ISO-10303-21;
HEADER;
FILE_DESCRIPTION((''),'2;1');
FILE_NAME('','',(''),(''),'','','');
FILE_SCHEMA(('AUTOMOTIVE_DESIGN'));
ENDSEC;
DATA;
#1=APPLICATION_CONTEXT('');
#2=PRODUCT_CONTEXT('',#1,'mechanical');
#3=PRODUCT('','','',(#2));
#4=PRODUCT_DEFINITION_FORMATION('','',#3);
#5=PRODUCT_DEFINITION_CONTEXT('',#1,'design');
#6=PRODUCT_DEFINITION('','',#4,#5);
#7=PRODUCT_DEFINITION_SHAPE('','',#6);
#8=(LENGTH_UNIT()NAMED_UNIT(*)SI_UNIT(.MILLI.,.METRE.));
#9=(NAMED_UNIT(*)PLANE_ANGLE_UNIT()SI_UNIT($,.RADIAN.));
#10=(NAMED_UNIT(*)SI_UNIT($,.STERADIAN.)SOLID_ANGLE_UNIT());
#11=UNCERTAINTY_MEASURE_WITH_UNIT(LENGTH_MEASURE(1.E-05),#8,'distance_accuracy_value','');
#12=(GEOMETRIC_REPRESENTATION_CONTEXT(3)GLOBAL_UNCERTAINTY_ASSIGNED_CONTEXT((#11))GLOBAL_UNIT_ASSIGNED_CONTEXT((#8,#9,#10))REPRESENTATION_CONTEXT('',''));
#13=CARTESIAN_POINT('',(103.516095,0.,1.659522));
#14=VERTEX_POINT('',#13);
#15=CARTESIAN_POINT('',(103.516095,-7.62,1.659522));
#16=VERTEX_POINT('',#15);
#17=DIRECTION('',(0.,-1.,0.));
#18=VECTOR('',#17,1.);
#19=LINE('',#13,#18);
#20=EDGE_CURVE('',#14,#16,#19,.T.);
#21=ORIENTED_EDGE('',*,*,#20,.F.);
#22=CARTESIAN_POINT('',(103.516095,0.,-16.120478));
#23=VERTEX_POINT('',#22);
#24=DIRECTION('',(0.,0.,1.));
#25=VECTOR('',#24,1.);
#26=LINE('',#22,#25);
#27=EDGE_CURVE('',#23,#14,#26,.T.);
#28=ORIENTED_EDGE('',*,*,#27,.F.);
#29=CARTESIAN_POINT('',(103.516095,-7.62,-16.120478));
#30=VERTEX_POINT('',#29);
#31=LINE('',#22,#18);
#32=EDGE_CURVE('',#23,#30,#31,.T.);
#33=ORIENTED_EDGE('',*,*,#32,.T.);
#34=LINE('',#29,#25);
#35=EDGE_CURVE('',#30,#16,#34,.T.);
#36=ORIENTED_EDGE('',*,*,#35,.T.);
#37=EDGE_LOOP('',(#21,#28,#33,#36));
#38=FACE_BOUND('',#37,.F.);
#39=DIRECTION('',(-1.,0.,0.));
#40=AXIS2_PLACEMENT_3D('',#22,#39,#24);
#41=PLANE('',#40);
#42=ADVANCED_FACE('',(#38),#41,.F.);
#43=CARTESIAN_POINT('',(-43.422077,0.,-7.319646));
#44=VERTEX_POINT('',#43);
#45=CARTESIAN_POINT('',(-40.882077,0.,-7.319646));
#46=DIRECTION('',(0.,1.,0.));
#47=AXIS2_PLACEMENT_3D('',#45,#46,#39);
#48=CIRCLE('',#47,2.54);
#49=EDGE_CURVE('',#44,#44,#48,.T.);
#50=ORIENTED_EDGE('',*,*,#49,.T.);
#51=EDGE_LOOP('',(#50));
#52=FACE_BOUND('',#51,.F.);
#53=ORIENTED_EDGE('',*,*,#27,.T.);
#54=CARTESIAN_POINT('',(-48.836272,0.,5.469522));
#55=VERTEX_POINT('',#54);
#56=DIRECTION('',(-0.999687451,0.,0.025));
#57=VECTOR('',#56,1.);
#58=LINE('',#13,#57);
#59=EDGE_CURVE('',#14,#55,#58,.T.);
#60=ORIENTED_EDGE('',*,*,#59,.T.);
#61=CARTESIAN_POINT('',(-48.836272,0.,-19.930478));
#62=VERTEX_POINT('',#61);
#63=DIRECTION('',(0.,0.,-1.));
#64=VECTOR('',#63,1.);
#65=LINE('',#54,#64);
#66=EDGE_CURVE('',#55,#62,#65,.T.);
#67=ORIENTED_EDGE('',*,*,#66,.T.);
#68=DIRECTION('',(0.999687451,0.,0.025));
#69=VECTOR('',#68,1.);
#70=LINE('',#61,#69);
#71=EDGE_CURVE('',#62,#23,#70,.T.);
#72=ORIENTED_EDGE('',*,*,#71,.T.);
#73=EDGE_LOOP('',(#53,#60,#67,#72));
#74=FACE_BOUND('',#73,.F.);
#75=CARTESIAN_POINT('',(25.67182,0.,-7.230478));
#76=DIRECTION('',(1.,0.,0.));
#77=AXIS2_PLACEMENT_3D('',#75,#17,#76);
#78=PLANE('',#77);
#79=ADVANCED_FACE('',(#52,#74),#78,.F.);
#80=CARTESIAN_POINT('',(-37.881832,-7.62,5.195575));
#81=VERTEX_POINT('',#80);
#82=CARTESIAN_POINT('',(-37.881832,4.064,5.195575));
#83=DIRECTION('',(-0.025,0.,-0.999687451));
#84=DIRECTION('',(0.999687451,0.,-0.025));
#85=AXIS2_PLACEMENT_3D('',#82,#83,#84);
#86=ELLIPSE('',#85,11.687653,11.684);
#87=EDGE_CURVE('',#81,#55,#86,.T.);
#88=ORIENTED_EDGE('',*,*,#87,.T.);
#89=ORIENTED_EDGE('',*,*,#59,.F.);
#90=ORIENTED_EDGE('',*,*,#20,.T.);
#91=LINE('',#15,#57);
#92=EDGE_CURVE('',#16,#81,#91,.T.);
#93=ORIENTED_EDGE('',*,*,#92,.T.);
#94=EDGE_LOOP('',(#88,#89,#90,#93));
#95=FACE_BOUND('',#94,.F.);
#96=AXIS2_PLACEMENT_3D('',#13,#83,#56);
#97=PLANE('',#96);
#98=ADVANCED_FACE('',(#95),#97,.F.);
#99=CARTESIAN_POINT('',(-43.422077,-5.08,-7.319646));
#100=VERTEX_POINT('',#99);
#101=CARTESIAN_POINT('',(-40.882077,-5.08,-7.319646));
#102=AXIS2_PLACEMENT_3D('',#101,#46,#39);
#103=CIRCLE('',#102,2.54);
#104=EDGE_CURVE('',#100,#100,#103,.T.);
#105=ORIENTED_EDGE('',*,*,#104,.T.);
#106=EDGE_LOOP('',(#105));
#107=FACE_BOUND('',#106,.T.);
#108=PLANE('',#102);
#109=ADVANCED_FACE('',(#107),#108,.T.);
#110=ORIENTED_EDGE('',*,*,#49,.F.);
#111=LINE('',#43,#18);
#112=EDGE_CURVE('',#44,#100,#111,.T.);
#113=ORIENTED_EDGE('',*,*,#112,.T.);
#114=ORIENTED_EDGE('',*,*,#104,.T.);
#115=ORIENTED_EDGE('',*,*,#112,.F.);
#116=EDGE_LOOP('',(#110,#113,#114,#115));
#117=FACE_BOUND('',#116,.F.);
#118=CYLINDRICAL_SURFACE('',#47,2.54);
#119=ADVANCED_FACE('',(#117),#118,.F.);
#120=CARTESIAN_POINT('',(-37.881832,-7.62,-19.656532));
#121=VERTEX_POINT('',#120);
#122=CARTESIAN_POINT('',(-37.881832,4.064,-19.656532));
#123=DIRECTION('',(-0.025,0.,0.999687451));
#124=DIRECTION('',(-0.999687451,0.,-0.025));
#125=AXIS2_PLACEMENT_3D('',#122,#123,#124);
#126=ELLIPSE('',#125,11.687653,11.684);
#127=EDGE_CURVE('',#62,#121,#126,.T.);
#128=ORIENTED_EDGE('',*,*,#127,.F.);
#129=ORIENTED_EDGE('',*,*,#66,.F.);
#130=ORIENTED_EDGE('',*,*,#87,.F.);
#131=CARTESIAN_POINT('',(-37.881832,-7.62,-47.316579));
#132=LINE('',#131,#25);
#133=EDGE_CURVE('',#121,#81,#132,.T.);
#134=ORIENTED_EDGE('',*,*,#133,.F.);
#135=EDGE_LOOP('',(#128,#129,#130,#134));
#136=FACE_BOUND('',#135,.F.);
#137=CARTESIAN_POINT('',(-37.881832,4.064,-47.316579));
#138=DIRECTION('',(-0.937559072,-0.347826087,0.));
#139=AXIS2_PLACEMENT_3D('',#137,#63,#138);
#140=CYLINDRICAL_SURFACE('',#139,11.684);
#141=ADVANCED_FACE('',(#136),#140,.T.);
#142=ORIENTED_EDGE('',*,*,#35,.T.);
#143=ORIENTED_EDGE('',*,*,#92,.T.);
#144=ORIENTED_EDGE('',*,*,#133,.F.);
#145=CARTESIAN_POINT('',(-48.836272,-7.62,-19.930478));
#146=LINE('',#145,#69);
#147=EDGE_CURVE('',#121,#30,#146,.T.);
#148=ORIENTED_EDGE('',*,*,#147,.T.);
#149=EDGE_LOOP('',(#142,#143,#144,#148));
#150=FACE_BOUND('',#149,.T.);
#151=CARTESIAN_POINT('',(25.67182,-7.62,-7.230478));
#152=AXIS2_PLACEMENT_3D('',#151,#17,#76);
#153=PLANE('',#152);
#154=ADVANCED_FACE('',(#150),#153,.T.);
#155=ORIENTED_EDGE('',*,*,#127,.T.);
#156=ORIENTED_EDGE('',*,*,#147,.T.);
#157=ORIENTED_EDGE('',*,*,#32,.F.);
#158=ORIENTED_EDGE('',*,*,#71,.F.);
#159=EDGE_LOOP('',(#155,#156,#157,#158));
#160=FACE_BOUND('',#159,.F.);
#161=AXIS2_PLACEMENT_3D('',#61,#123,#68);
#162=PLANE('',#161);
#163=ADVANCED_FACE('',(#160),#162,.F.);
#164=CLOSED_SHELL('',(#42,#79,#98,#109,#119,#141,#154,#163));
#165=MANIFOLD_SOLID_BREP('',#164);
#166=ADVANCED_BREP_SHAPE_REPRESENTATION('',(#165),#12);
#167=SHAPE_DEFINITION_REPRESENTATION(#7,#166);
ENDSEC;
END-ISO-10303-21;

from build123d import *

# Parameters (mm, degrees)
F1_DEPTH    = 7.62
F2_T1_DEPTH = 80.1722009782
F3_R        = 2.54
F4_DEPTH    = 5.08


# Not quite as in the source:
# - a fillet or chamfer that OpenCascade refuses, or shapes differently, is made with other operations: its cross-section is extruded or revolved along the edge and cut away or added


with BuildPart() as f1:
    # F0 (on Front) → F1 (new body)
    with BuildSketch(Plane.XZ):
        Polygon((-48.8362722099, 5.4695218146), (-48.8362722099, -19.9304781854), (103.5160953464, -16.1204781854), (103.5160953464, 1.6595218146), align=None)
    extrude(amount=F1_DEPTH)

    # F2: fillet of radius 11.684 on 1 edges, made by hand

    # F2_s2 → F2_t1 (cut)
    with BuildSketch(Plane.XY.offset(-47.3165786745)):
        with BuildLine():
            ThreePointArc((-48.8362722099, 0), (-44.5538661868, -5.527653455), (-37.8818320142, -7.62))
            Line((-37.8818320142, -7.62), (-48.8362722099, -7.62))
            Line((-48.8362722099, -7.62), (-48.8362722099, 0))
        make_face()
    extrude(amount=F2_T1_DEPTH, mode=Mode.SUBTRACT)

    # F3 (on face) → F4 (cut)
    with BuildSketch(Plane(origin=(0, 0, 0), x_dir=(-1, 0, 0), z_dir=(0, 1, 0))):
        with Locations((40.8820770681, -7.3196464218)):
            Circle(F3_R)
    extrude(amount=-F4_DEPTH, mode=Mode.SUBTRACT)


solid = f1.part
